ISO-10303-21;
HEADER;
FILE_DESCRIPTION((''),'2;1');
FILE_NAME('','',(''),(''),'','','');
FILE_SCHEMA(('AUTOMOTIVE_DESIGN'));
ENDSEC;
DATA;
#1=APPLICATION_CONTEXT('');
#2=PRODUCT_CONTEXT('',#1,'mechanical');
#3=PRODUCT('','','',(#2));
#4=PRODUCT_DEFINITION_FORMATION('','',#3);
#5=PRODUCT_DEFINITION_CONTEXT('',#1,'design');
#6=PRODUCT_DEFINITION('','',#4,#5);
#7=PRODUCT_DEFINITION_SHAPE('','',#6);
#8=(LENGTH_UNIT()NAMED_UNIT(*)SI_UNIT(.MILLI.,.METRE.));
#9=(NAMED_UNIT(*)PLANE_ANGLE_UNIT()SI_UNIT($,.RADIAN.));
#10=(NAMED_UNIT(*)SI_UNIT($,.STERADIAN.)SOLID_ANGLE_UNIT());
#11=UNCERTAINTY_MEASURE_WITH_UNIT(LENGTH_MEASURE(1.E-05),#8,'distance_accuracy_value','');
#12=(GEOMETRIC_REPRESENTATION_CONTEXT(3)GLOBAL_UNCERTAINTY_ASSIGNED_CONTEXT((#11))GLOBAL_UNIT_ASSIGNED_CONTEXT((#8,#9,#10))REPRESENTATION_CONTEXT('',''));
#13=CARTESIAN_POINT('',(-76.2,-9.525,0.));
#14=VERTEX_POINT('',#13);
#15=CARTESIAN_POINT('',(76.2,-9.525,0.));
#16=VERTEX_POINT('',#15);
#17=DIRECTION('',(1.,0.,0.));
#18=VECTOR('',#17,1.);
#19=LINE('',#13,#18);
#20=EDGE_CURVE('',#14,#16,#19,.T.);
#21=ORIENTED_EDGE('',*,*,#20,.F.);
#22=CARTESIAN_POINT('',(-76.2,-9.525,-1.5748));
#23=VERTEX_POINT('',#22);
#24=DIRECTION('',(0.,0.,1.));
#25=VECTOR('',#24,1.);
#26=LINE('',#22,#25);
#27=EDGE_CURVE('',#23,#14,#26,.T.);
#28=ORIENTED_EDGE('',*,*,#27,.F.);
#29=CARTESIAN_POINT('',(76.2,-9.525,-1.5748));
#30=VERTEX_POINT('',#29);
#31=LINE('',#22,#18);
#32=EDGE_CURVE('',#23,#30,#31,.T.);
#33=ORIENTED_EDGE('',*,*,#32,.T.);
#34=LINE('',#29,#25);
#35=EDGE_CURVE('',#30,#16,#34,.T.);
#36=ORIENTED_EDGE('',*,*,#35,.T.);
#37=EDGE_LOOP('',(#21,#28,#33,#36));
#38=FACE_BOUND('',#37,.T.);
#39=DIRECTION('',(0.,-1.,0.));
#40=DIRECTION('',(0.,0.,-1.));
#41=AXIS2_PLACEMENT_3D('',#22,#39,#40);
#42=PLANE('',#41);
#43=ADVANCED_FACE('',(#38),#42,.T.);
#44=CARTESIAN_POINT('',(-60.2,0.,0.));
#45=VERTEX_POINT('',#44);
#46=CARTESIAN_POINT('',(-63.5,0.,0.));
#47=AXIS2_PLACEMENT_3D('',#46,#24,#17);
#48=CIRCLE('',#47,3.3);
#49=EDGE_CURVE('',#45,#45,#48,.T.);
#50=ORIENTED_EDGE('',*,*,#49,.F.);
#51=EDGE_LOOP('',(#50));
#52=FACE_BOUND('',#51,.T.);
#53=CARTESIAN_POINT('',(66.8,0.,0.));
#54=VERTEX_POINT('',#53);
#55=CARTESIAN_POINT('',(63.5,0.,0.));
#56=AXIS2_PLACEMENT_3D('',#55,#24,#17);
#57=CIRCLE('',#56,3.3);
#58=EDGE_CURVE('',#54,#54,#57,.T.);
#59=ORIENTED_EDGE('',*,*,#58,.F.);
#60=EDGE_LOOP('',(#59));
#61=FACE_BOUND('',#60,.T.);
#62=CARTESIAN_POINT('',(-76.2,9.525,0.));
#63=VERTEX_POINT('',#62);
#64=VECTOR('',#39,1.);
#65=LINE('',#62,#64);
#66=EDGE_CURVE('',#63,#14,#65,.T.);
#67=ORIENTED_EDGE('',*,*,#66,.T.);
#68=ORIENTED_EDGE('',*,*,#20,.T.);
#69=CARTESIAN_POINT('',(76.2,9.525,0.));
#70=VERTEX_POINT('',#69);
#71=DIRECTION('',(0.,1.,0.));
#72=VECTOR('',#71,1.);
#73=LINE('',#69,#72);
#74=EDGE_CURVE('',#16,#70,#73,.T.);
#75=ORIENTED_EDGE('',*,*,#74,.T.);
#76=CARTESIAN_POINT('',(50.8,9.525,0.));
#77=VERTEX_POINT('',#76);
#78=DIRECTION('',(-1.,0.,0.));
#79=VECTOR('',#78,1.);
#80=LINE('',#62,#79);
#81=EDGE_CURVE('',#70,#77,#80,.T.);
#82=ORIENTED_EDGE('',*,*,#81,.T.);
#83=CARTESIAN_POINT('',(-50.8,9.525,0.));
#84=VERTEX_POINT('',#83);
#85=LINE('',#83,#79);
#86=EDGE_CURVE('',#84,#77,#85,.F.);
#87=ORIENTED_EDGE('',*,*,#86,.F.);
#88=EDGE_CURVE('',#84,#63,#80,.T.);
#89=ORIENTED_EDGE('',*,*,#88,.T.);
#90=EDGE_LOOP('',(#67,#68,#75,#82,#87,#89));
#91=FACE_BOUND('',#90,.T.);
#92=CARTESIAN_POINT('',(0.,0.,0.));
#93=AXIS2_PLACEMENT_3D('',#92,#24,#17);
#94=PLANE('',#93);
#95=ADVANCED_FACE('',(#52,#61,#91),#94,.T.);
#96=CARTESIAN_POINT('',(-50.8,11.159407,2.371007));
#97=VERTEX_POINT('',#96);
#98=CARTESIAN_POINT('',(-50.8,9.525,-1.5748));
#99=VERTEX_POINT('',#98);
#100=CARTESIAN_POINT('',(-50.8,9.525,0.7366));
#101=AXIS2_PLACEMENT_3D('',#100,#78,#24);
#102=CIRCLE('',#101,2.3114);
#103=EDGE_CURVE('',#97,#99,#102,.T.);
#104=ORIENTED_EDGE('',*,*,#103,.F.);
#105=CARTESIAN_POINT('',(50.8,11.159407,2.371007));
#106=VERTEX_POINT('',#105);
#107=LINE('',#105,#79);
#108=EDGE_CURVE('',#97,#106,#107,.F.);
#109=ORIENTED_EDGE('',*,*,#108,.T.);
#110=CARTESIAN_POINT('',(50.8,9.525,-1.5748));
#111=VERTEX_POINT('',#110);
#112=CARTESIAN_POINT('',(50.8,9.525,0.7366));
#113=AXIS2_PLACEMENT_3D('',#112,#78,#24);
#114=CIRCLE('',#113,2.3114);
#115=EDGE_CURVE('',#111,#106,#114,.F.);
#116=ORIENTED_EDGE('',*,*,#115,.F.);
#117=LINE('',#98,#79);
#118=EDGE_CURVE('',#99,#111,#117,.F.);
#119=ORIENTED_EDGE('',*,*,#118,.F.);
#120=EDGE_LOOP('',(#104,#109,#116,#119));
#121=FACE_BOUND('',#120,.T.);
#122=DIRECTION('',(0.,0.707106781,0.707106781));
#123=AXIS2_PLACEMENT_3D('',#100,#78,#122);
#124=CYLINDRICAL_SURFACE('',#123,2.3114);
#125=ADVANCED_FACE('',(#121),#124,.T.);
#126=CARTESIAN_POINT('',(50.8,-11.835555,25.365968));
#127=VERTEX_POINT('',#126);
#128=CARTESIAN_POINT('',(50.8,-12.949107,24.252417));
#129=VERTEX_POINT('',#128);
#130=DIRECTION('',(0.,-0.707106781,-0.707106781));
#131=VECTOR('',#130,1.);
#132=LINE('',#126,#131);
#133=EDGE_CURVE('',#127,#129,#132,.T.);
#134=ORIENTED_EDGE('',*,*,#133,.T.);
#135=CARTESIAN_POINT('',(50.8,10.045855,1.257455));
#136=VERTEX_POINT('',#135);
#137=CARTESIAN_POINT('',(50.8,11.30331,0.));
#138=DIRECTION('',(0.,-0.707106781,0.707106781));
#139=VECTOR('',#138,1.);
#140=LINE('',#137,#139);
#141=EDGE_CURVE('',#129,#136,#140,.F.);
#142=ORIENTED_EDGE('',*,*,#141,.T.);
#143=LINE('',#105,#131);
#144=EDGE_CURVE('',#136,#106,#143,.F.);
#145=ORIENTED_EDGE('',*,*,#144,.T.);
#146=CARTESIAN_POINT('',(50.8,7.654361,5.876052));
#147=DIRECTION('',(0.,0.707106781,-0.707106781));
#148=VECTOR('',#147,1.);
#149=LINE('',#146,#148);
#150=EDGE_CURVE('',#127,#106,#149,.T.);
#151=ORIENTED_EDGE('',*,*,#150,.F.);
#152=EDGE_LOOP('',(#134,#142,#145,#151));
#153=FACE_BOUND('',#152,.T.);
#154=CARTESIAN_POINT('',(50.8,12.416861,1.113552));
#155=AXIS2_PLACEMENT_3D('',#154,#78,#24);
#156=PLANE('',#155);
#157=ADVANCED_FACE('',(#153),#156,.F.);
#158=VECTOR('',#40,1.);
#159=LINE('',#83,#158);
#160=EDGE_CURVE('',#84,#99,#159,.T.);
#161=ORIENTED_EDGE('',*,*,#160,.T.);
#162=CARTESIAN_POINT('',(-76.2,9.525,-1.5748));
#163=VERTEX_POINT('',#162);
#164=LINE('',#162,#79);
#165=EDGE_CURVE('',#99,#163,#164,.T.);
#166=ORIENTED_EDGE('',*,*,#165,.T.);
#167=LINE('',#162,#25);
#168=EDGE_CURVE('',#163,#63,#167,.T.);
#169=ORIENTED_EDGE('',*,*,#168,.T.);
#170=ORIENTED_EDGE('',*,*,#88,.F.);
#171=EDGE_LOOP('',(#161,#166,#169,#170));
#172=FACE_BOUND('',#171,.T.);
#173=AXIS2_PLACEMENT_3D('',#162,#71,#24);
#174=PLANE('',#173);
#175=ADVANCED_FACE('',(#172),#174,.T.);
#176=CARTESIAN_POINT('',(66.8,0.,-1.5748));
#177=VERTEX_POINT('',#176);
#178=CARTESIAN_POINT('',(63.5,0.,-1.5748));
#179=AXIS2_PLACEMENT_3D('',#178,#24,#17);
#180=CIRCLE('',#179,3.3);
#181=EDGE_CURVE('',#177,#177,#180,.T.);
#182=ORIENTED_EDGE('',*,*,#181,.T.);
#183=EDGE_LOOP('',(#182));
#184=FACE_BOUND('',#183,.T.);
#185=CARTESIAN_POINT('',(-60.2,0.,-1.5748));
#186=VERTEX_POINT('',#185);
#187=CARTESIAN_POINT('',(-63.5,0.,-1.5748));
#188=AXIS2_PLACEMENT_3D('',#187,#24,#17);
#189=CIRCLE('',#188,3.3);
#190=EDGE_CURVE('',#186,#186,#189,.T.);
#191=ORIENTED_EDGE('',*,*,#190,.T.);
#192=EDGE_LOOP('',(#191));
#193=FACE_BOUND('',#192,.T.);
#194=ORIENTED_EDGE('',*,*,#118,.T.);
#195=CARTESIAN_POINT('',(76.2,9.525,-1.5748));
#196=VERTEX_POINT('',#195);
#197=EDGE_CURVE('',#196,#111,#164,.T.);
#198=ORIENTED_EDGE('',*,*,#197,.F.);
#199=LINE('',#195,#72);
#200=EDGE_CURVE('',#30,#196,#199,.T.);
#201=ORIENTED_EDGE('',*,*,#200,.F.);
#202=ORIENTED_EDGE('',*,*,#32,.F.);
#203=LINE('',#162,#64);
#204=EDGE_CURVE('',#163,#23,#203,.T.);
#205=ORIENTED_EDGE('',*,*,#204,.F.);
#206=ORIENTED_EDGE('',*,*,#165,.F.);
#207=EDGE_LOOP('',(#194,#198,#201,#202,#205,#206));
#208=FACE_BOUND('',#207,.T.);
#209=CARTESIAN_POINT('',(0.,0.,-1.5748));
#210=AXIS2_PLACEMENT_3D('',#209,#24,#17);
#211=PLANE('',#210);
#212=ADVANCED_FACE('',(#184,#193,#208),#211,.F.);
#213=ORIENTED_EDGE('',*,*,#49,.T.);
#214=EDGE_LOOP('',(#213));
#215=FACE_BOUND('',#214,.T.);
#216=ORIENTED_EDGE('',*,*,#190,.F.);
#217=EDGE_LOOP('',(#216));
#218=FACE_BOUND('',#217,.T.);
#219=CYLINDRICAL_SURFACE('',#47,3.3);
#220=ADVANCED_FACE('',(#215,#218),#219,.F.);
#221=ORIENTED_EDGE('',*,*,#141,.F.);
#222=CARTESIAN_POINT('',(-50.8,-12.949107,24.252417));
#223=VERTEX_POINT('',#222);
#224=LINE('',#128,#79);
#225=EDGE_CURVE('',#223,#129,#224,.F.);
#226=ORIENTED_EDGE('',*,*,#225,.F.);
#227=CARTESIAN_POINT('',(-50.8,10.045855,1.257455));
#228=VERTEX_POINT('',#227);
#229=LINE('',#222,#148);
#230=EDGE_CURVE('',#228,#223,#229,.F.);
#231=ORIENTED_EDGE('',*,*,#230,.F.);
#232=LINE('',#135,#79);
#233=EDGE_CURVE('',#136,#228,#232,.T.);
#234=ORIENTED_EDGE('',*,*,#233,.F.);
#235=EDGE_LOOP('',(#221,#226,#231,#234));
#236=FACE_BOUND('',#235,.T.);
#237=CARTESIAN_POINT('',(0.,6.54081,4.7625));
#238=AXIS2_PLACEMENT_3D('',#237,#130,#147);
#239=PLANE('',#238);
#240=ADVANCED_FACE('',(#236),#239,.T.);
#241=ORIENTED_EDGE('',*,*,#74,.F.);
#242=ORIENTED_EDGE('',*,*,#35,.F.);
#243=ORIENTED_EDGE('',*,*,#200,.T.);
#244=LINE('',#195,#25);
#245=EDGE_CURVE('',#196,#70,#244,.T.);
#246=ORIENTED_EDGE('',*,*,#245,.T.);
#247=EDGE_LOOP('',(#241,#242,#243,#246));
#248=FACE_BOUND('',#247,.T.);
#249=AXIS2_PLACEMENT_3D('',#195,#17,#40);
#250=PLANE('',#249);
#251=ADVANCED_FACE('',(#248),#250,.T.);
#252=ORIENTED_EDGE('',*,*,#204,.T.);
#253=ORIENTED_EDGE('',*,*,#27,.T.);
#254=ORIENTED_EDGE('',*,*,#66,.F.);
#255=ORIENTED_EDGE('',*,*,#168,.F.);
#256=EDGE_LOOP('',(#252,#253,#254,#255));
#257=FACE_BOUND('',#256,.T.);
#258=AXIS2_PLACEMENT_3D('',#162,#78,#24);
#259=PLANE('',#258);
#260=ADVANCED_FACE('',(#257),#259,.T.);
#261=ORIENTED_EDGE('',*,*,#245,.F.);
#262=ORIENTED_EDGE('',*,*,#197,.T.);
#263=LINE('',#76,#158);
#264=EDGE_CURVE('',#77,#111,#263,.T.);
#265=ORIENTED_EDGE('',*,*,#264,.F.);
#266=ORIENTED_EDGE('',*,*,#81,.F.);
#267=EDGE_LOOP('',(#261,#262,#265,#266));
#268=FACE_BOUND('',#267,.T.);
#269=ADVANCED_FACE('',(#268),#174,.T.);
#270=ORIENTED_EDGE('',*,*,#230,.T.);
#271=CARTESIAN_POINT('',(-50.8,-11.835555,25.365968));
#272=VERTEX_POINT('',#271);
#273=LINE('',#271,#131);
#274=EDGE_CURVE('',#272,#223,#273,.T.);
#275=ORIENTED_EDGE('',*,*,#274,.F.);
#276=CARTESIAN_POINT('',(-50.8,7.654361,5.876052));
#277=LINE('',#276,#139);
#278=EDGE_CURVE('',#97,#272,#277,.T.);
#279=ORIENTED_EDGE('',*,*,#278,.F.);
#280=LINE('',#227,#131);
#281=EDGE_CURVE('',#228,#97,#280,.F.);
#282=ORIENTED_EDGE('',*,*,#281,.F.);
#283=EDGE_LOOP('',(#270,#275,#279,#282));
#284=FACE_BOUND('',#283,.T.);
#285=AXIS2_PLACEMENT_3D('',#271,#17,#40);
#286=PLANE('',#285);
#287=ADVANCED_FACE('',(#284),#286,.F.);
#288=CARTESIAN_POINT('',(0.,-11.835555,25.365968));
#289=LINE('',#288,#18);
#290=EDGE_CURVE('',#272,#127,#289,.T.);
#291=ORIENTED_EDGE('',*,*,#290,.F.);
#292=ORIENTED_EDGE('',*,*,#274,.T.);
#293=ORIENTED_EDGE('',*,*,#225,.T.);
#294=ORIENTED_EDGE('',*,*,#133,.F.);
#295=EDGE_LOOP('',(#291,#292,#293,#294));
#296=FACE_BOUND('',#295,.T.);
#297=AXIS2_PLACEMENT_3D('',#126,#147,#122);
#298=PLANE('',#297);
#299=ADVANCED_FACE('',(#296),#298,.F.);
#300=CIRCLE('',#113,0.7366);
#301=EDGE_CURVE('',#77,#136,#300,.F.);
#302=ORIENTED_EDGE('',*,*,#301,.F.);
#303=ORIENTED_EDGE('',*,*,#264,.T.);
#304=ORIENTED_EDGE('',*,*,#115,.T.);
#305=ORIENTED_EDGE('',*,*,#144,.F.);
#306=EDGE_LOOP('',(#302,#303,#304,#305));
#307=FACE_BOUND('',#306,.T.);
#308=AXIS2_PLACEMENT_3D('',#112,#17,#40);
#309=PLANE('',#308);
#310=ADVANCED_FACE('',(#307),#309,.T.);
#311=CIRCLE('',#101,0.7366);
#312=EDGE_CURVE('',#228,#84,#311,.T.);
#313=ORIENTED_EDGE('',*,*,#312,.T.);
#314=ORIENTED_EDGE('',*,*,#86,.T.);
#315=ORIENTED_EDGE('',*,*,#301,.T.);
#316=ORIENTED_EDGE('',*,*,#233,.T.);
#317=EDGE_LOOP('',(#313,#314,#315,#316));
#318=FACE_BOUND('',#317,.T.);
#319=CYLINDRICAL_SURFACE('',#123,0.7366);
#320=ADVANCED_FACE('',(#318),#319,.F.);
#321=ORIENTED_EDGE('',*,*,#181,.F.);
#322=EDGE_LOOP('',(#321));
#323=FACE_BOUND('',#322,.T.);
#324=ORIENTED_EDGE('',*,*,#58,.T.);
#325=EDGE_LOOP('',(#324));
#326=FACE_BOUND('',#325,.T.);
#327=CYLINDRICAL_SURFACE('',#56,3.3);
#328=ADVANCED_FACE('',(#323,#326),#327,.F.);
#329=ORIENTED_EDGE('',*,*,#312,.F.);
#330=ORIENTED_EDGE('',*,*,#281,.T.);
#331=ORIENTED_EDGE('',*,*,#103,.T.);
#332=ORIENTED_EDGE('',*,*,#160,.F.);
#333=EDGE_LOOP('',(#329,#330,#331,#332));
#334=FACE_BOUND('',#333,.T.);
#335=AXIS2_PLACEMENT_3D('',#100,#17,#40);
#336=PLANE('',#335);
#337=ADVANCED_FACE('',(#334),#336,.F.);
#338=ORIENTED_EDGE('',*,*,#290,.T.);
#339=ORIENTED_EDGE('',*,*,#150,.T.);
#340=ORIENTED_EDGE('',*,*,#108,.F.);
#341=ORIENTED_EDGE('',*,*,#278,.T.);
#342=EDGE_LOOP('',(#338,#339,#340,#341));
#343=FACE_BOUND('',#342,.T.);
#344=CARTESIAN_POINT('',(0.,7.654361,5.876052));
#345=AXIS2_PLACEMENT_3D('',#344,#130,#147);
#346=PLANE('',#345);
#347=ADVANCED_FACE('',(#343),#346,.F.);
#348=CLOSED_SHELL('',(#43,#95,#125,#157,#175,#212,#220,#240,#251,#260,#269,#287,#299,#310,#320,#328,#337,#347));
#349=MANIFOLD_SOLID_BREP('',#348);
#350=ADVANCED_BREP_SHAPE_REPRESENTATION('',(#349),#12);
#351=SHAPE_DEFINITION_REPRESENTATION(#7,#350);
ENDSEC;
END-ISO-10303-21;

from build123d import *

# Parameters (mm, degrees)
SKETCH3_W            = 152.4
SKETCH3_H            = 19.05
BASE_FLANGE1_DEPTH   = 1.5748
EDGE_FLANGE1_DEPTH   = 101.6
M6_CLEARANCE_HOLE1_D = 6.6


# Sheet-metal steps are written as plain solids
with BuildPart() as part:
    # Sketch3 → Base-Flange1 (new body)
    with BuildSketch(Plane.XY):
        Rectangle(SKETCH3_W, SKETCH3_H)
    extrude(amount=-BASE_FLANGE1_DEPTH)

    # Edge-Flange1 section (across the edge) → Edge-Flange1 (add)
    with BuildSketch(Plane(origin=(50.8, 11.30330971, 0), x_dir=(0, -0.7071067811865488, -0.7071067811865464), z_dir=(-1, 0, 0))):
        with BuildLine():
            Line((-1.5748, 1.77830971), (-1.5748, 34.298096482))
            Line((-1.5748, 34.298096482), (0, 34.298096482))
            Line((0, 34.298096482), (0, 1.77830971))
            ThreePointArc((0, 1.77830971), (0.454715384, 1.097780046), (1.257454855, 1.257454855))
            Line((1.257454855, 1.257454855), (2.371006614, 0.143903096))
            ThreePointArc((2.371006614, 0.143903096), (-0.147934486, -0.357145441), (-1.5748, 1.77830971))
        make_face()
    extrude(amount=EDGE_FLANGE1_DEPTH)

    # M6 Clearance Hole1 (through all)
    with Locations(Plane.XY):
        with Locations((-63.5, 0), (63.5, 0)):
            Hole(M6_CLEARANCE_HOLE1_D / 2)


solid = part.part
